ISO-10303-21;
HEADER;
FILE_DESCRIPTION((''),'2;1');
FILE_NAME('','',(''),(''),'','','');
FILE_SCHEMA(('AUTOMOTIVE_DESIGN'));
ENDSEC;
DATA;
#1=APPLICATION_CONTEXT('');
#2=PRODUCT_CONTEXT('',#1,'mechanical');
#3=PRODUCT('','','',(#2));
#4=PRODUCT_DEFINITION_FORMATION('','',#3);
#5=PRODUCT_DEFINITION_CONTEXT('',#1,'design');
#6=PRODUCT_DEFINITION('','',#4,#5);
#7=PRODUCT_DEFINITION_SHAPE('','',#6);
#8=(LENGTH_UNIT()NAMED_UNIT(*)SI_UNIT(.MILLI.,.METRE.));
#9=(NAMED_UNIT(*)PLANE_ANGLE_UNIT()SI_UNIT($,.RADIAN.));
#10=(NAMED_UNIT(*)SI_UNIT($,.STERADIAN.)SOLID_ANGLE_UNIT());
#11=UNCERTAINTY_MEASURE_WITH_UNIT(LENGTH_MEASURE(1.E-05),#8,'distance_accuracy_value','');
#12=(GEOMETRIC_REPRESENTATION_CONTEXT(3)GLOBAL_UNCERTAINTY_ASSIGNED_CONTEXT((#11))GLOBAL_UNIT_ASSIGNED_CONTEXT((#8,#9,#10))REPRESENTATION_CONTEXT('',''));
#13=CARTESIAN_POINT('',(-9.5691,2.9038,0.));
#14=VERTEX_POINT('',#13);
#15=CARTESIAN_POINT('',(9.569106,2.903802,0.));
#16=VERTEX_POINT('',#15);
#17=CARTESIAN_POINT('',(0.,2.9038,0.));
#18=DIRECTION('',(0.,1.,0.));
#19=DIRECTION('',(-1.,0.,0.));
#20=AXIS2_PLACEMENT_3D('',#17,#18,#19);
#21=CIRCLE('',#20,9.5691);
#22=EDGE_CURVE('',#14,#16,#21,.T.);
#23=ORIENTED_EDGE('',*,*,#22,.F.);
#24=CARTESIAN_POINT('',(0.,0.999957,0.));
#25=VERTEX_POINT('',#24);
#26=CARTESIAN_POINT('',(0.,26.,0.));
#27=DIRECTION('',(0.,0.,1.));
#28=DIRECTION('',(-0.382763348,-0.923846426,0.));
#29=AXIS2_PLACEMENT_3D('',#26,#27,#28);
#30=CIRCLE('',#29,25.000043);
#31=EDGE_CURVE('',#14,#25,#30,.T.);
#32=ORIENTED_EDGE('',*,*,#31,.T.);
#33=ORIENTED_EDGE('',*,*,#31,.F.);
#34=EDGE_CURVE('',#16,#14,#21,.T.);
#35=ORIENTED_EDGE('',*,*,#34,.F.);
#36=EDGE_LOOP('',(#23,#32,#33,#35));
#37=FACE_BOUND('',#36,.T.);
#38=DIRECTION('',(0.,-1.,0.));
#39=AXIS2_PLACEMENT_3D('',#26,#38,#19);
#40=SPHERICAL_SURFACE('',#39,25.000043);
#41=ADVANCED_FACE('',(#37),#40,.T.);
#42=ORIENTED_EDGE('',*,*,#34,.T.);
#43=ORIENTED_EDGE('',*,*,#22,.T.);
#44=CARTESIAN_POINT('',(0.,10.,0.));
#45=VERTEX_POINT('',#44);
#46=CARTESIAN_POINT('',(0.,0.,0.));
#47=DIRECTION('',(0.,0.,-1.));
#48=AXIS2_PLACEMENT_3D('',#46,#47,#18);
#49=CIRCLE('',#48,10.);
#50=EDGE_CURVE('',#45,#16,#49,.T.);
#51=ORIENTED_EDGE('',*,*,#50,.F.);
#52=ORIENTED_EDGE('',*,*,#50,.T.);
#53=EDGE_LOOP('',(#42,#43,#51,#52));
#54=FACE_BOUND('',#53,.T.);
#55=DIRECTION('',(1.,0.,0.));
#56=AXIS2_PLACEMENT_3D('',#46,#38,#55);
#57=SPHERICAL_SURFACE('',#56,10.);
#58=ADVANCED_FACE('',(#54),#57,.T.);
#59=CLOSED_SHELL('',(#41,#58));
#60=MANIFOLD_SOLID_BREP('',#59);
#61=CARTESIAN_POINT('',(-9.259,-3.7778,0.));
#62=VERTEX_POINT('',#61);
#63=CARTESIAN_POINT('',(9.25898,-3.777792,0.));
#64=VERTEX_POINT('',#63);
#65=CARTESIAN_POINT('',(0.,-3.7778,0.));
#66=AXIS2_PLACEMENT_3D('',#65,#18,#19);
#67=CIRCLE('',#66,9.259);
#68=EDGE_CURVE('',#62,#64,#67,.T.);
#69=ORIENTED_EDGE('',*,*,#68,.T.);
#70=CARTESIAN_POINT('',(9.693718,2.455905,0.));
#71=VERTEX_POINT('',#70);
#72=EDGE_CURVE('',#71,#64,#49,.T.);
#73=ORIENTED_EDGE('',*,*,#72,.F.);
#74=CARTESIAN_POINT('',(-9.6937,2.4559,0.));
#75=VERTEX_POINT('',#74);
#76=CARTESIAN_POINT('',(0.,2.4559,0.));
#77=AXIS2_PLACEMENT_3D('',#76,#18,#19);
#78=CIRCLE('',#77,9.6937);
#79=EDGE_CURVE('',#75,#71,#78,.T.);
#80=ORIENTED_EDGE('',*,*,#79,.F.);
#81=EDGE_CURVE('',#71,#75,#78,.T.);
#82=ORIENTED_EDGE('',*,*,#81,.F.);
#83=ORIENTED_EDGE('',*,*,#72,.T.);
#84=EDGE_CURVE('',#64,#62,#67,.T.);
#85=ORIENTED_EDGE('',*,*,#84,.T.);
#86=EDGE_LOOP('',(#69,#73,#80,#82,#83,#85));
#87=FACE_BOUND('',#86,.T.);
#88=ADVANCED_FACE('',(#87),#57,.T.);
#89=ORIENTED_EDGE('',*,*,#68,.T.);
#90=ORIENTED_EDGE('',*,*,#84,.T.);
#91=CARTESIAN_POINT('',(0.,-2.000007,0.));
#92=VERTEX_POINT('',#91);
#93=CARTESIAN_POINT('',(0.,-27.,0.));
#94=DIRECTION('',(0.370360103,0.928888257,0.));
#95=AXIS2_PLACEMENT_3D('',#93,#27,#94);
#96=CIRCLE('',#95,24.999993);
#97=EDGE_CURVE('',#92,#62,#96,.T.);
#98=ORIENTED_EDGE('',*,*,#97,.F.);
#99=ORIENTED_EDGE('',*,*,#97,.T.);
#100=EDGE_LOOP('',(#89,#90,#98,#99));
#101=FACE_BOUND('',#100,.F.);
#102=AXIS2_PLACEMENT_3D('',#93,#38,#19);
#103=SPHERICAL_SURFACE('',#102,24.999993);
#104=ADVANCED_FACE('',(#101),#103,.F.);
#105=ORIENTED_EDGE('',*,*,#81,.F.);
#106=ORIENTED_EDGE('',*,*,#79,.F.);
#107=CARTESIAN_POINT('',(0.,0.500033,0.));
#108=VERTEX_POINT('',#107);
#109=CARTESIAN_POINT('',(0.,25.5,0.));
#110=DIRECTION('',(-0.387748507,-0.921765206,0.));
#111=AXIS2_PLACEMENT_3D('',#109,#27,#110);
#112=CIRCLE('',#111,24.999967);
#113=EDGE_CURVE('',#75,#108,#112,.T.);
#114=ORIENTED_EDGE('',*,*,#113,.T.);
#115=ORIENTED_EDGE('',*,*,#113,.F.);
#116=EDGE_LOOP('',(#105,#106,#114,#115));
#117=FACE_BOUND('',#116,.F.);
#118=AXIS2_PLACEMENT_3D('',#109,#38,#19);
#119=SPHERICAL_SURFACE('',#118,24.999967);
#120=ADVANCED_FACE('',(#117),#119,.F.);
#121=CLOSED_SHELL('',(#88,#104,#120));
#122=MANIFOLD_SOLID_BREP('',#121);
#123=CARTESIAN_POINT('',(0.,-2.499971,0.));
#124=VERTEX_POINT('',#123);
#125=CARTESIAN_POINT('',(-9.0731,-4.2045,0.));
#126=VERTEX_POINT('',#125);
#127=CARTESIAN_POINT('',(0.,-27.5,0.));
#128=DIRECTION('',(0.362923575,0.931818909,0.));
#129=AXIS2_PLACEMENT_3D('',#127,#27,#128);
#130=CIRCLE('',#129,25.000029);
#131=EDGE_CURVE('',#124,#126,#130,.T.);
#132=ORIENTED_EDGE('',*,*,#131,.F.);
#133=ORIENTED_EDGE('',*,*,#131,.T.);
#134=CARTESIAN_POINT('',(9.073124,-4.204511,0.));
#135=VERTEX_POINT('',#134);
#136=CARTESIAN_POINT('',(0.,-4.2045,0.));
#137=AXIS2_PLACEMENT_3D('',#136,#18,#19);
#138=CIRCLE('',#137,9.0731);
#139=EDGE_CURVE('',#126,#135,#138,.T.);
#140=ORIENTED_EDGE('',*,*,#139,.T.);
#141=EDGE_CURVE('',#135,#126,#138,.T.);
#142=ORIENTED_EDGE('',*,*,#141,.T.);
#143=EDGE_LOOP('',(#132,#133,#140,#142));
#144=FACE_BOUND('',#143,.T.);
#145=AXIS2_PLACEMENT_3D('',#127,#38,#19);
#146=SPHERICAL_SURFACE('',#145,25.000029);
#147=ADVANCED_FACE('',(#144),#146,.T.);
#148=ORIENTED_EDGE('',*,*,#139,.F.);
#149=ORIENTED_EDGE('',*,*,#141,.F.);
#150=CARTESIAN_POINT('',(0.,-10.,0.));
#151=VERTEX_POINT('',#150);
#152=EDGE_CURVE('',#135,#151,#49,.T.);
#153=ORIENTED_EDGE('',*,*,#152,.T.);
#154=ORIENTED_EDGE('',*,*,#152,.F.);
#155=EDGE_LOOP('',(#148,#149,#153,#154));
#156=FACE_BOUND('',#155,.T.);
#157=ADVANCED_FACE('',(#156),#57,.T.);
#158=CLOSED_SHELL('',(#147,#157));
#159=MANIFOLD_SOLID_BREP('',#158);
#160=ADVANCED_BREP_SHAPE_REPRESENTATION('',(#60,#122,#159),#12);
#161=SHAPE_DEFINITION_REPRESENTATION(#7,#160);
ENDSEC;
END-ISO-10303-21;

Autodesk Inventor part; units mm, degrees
ref_plane "YZ Plane" through (0, 0, 0) normal (1, 0, 0) x (0, 1, 0)
ref_plane "XZ Plane" through (0, 0, 0) normal (0, 1, 0) x (-1, 0, 0)
ref_plane "XY Plane" through (0, 0, 0) normal (0, 0, 1) x (1, 0, 0)
sketch "Esboço1" plane through (0, 0, 0) normal (0, 0, 1) x (1, 0, 0)
  circle A0 centre (0, 0) radius 10 construction
  arc A1 (0, 10) -> (0, -10) centre (0, 0) ccw
  line L0 (0, 10) -> (0, 0)
  line L1 (0, 0) -> (0, -10)
  line L2 (-14, 0) -> (14, 0) projected
  line L3 (0, -38.2) -> (0, 36.7) projected
  line L4 (0, 0) -> (0, -2) construction
  arc A2 (9.259, -3.7778) -> (-9.259, -3.7778) centre (0, -27) ccw
  line L5 (0, 2) -> (0, 0) construction
  arc A3 (-9.5691, 2.9038) -> (9.5691, 2.9038) centre (0, 26) ccw
  arc A4 (9.0731, -4.2045) -> (-9.0731, -4.2045) centre (0, -27.5) ccw
  arc A5 (-9.6937, 2.4559) -> (9.6937, 2.4559) centre (0, 25.5) ccw
  point P0 (0, 1)
  point P1 (0, -2.5)
  point P2 (0, 0.5)
  point P3 (0, -2.5)
  point P4 (0, -2)
  point P5 (0, 0.5)
  point P6 (0, 1)
  dimension "d0" = 20
  dimension "d6" = 2
  dimension "d7" = 25
  dimension "d8" = 0.5
  dimension "d9" = 0.5
revolve "Revolução1" add sketch "Esboço1" angle 360 mid plane about axis through (0, -10, 0) along (0, 1, 0)
revolve "Revolução2" cut sketch "Esboço1" angle 360 about axis through (0, -10, 0) along (0, 1, 0) contours A3 L0 A5 A1 | A2 L1 A4 A1
properties part number "Sessao8_07_04_2025_0003_0001" material "Ouro"
